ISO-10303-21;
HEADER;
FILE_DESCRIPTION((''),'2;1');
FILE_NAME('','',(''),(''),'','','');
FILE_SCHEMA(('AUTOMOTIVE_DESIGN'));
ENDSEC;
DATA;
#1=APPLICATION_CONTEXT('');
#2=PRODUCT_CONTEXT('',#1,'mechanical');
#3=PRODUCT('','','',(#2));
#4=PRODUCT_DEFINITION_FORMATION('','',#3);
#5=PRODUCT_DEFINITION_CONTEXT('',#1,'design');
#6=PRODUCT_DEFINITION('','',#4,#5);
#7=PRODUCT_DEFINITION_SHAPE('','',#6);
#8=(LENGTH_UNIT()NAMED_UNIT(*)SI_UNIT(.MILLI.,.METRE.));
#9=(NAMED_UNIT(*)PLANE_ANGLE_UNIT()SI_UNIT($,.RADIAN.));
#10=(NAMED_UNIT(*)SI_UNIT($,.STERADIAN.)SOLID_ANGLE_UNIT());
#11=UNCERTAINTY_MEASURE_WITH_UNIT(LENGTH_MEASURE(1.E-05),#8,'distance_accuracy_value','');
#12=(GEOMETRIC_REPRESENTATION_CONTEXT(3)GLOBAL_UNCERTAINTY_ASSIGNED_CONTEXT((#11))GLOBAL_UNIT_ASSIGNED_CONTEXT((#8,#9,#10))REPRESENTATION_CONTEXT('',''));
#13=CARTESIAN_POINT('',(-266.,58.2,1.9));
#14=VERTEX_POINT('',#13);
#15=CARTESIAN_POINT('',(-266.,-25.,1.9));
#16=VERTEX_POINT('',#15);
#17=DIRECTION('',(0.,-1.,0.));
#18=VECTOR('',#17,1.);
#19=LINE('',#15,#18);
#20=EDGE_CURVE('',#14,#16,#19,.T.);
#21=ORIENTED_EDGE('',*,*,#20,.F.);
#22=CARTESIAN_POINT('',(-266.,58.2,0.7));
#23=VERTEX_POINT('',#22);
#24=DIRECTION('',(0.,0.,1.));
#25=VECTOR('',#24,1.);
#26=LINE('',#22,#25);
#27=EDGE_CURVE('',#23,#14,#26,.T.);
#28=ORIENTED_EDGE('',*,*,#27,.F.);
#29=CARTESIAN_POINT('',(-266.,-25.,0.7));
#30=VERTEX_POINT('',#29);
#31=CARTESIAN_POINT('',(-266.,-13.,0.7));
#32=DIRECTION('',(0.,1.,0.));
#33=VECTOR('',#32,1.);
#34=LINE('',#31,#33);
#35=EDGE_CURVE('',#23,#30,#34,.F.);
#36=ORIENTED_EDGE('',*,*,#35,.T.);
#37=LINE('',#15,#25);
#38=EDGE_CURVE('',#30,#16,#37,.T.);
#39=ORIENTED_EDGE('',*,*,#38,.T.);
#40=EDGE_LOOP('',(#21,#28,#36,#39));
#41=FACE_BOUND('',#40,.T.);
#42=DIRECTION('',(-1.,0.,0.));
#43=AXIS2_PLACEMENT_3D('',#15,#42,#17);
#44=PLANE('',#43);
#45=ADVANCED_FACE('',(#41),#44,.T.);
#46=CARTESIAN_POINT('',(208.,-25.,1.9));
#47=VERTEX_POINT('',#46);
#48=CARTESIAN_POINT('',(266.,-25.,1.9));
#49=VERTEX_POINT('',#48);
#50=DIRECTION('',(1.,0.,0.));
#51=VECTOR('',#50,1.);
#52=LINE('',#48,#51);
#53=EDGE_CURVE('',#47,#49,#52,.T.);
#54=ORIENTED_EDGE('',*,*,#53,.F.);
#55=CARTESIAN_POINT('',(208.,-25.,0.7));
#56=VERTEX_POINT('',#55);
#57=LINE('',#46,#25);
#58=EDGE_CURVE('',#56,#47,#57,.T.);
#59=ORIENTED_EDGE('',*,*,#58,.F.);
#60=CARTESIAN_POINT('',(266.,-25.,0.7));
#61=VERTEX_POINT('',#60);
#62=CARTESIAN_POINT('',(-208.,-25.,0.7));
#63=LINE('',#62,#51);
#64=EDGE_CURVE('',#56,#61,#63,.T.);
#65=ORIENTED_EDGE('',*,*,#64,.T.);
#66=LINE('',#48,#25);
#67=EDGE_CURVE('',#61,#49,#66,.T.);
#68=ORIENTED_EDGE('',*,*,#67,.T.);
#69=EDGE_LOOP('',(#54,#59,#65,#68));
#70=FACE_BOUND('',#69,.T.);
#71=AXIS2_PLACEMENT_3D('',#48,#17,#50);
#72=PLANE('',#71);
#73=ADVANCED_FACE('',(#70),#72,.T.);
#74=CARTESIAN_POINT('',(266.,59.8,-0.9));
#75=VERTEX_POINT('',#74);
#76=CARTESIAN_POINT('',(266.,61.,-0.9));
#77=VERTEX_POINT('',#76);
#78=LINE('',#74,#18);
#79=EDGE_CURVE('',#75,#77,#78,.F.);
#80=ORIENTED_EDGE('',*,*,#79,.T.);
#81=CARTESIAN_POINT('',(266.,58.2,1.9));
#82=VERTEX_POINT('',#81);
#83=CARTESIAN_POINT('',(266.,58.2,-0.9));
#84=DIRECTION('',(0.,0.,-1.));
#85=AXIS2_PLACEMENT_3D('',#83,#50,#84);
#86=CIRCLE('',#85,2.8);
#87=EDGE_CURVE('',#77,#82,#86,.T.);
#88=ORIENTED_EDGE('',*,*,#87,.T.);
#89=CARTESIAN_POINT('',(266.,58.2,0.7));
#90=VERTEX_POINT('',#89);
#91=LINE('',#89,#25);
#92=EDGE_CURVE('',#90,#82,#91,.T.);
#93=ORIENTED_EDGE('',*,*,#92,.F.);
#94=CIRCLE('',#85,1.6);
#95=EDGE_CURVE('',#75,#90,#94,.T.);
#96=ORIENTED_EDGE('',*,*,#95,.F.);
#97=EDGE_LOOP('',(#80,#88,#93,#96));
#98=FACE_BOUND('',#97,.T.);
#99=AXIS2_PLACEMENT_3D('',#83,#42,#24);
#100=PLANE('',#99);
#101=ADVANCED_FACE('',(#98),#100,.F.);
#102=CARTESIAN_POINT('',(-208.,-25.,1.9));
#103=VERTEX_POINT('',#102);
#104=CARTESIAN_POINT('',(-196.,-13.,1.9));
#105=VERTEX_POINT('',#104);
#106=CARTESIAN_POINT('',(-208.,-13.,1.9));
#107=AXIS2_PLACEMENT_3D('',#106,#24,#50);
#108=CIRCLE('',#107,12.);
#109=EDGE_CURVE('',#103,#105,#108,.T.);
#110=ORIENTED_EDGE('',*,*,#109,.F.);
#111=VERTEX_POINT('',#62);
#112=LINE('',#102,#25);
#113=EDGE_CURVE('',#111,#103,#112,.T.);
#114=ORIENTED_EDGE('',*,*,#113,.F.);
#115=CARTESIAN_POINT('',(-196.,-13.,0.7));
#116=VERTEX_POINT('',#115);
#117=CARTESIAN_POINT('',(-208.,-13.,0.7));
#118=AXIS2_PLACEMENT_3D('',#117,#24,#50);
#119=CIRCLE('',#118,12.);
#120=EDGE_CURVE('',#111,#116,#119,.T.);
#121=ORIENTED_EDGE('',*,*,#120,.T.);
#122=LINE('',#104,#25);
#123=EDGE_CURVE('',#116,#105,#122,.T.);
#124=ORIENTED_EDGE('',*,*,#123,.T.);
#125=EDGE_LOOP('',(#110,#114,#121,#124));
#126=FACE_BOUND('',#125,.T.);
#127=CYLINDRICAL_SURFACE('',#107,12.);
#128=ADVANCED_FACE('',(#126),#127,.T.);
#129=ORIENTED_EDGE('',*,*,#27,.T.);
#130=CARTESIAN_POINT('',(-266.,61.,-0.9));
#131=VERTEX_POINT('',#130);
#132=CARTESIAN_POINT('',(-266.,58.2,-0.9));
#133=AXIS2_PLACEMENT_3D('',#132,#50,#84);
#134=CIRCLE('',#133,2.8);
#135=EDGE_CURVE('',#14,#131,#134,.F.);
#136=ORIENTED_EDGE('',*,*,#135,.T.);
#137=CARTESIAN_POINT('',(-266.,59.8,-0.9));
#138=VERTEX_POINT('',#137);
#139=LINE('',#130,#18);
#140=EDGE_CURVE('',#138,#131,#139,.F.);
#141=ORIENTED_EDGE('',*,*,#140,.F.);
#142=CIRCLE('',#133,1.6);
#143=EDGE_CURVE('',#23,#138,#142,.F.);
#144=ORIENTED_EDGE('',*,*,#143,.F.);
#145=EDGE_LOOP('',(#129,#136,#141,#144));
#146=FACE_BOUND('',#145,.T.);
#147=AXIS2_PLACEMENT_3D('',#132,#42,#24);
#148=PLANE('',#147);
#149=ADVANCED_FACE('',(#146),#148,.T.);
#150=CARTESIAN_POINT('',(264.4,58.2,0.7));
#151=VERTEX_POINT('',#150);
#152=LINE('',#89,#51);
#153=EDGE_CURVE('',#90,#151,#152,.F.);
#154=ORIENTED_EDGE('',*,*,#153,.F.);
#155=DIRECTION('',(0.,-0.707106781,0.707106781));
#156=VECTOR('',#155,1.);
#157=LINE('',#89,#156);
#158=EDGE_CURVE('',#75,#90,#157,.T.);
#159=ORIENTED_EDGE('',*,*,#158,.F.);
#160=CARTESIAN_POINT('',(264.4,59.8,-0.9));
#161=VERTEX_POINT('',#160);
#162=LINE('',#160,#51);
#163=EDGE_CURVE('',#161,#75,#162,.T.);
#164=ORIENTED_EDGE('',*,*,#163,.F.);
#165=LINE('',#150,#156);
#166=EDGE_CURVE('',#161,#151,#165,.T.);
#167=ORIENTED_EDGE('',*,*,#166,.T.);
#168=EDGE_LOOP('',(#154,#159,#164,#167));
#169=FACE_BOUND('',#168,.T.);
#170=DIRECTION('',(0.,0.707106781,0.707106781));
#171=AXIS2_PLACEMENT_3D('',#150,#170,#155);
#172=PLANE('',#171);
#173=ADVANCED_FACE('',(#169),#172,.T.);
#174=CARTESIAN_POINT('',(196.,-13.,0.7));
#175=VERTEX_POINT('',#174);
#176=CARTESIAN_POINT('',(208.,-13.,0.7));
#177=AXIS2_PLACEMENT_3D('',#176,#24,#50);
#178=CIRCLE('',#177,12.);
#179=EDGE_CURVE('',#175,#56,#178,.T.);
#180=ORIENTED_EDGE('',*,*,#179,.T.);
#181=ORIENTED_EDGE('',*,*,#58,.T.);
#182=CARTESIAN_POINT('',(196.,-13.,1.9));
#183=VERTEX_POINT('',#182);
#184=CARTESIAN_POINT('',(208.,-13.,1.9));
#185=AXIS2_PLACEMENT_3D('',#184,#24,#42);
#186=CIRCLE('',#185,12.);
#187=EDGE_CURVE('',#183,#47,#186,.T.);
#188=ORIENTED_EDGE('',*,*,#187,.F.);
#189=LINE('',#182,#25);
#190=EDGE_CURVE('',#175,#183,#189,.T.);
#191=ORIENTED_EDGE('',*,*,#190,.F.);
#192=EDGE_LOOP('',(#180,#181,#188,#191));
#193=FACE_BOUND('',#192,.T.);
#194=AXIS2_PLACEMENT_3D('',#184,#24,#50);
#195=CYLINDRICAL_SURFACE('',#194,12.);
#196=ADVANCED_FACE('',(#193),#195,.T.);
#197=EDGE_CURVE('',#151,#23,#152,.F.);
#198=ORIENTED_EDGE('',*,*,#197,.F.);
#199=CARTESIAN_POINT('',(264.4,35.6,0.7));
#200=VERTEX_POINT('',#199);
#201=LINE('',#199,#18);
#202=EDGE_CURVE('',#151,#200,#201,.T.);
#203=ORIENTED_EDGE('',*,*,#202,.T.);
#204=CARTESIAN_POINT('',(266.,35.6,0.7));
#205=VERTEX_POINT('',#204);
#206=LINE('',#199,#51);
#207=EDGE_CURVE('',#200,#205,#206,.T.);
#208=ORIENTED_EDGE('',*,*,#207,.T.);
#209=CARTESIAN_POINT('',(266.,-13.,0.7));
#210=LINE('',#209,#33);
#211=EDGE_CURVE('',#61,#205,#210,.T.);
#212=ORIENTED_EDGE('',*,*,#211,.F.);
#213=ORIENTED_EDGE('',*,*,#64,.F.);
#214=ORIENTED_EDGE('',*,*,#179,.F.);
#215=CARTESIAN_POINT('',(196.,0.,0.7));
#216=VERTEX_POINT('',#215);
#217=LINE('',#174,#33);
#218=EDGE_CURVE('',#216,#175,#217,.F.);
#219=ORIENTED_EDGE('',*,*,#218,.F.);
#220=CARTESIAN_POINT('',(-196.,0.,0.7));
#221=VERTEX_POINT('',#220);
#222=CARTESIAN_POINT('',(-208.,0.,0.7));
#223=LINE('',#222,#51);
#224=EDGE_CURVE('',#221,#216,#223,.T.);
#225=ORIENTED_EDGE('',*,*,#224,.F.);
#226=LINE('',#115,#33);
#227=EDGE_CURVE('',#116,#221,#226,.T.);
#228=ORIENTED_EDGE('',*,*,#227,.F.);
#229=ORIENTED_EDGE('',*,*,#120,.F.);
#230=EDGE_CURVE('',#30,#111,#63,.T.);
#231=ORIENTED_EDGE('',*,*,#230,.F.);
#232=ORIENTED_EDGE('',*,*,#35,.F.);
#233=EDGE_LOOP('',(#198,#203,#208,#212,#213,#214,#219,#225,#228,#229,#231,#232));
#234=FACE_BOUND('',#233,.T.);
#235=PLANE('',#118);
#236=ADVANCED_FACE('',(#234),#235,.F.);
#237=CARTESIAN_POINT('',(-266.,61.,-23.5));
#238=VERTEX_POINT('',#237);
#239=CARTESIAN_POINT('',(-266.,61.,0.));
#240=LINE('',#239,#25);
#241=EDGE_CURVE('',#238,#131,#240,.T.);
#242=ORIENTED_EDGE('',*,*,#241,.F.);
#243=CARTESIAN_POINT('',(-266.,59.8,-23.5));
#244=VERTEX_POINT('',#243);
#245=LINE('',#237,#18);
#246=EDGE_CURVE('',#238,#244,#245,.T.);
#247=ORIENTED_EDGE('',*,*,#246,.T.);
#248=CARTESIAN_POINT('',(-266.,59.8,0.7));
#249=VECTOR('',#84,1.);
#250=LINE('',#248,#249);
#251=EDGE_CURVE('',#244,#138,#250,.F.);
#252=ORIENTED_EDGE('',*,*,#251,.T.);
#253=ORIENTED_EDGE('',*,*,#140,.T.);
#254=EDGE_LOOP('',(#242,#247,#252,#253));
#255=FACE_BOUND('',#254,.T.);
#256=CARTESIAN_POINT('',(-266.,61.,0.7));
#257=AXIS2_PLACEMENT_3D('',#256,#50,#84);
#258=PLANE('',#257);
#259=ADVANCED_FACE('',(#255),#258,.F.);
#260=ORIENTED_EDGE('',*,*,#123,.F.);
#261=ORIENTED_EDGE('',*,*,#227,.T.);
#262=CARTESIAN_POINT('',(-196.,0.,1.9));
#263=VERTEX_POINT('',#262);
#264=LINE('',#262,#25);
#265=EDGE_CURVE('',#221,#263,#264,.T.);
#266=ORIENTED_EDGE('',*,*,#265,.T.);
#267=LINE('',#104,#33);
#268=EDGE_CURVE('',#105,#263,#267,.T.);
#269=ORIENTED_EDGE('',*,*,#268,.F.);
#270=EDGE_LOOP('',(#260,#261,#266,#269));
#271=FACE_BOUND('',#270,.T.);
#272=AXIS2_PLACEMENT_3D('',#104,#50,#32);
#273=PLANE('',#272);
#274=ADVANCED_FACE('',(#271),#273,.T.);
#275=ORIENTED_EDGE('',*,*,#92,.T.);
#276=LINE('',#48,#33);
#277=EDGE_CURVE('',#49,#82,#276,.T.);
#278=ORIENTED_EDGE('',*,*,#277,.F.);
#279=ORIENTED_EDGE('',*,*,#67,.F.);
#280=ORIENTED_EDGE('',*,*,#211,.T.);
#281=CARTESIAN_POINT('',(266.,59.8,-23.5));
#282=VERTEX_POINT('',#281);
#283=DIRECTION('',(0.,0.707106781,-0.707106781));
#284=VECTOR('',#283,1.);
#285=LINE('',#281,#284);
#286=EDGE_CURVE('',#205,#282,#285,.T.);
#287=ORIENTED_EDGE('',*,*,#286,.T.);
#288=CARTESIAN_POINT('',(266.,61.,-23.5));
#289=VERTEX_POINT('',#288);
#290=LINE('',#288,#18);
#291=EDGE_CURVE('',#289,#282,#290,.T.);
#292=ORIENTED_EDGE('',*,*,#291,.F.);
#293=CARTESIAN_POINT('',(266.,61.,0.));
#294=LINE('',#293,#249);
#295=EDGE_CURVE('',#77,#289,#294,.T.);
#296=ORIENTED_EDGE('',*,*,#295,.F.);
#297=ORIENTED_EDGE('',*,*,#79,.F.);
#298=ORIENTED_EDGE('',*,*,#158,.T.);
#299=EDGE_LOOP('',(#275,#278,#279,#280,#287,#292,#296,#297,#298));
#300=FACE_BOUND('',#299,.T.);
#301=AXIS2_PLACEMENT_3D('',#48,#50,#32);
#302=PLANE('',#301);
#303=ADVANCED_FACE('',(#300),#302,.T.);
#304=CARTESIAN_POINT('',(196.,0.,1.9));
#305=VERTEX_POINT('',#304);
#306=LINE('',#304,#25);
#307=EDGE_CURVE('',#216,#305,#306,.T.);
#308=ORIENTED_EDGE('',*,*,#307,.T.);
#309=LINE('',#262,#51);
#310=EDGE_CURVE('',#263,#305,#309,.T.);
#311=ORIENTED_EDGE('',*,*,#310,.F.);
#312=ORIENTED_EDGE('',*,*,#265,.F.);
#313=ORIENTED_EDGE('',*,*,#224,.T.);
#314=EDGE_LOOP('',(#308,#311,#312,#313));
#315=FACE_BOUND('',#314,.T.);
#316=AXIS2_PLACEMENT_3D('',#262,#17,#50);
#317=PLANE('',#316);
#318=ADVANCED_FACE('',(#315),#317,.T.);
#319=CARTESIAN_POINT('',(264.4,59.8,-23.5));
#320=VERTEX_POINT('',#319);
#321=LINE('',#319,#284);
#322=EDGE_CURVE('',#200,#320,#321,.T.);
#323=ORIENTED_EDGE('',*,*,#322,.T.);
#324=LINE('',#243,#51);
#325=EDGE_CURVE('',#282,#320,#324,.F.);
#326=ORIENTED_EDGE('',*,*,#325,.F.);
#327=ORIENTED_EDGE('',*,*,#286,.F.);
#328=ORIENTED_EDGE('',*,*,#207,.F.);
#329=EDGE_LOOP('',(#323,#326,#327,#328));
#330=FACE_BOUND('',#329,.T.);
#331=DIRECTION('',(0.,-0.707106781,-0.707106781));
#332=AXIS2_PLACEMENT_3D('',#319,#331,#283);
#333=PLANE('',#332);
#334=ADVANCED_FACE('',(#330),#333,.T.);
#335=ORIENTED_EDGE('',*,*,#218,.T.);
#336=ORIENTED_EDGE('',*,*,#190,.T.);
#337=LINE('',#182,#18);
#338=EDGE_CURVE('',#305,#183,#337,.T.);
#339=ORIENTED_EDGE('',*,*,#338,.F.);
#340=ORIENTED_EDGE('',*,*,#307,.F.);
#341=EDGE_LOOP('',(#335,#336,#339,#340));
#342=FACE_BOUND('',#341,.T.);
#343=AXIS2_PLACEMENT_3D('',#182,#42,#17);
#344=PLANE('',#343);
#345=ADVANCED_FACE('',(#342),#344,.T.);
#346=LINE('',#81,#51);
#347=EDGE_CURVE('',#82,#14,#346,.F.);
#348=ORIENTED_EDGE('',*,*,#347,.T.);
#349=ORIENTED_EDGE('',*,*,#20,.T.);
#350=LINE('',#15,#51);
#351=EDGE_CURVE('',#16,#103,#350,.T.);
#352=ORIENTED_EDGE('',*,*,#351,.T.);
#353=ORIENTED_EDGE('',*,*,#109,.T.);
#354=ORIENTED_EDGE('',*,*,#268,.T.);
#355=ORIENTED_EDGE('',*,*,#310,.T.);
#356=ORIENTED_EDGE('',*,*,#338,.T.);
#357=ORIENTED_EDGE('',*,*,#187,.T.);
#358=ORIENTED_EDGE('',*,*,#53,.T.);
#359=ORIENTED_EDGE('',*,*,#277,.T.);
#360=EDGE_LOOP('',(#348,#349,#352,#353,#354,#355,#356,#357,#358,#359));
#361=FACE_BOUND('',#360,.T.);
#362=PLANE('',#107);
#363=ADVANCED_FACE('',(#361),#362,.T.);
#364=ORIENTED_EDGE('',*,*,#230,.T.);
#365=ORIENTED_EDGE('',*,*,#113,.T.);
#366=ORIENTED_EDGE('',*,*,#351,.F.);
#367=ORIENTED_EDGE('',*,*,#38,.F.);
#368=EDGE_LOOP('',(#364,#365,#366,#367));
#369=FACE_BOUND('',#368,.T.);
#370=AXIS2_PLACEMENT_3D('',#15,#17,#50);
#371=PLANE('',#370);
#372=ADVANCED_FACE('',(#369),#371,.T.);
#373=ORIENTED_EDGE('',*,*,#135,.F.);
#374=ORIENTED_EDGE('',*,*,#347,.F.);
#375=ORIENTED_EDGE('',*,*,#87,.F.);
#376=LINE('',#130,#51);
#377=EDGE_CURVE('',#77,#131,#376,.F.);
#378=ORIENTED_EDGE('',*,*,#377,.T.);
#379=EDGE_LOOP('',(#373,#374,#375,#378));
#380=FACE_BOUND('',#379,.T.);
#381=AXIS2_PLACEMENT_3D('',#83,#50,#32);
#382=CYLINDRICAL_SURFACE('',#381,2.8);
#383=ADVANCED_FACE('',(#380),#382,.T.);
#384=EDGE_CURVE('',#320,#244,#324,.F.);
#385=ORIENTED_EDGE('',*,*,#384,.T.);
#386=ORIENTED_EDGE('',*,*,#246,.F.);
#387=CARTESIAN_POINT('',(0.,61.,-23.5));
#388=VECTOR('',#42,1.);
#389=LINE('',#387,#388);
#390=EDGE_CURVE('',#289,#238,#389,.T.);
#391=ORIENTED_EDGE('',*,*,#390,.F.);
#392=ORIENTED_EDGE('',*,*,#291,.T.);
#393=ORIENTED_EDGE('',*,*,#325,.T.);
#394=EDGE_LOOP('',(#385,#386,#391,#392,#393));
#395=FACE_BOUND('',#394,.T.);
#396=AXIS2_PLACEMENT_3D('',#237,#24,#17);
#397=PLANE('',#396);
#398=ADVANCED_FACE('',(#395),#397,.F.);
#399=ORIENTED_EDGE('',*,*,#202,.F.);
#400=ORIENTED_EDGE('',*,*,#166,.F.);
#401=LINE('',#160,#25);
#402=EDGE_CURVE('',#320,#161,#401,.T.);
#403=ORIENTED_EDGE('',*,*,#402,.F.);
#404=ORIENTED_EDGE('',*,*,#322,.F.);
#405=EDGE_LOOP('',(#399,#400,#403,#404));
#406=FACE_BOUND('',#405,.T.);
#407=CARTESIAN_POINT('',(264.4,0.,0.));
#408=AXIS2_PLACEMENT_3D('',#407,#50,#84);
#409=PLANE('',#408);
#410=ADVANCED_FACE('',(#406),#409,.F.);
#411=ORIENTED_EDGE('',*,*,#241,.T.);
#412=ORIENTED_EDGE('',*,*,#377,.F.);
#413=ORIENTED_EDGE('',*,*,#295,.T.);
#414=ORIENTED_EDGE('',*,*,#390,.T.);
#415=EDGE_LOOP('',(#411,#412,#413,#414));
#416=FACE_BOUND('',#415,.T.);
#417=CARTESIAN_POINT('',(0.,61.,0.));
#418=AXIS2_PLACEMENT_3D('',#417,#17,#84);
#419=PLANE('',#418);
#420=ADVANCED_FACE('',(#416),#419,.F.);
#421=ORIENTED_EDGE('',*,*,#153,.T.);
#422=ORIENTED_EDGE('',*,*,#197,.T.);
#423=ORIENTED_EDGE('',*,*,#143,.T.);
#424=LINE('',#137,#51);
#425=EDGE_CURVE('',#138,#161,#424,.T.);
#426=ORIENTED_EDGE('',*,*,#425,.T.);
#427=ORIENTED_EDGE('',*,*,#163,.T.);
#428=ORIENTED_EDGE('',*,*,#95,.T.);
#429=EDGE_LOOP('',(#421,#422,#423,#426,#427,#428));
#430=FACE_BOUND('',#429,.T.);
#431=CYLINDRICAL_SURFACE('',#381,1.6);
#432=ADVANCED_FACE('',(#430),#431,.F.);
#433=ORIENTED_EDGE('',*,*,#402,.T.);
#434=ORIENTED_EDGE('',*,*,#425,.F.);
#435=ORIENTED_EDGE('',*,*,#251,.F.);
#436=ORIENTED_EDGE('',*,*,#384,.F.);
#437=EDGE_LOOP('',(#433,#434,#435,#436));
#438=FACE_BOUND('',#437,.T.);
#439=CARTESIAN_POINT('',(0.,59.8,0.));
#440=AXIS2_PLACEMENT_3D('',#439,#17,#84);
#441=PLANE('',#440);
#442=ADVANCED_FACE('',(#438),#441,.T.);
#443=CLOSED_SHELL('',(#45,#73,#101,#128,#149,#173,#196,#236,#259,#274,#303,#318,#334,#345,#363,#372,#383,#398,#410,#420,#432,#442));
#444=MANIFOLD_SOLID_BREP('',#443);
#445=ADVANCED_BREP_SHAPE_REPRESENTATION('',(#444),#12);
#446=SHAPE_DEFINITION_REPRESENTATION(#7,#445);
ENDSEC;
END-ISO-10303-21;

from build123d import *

# Parameters (mm, degrees)
RESSALTO_EXTRUS_O1_DEPTH       = 1.9
CONVERTER_S_LIDO1_DEPTH        = 0.7
ARESTA_FLANGE1_STRIP_W         = 8
ARESTA_FLANGE1_STRIP_H         = 1.2
ARESTA_FLANGE1_STRIP_CUT_DEPTH = 532
ARESTA_FLANGE1_DEPTH           = 532
RESSALTO_EXTRUS_O2_DEPTH       = 1.6


# Read off the part's stored shape, not the designer's step: Converter-Sólido1
# Sheet-metal steps are written as plain solids
with BuildPart() as part:
    # Esboço1 → Ressalto-extrusão1 (new body)
    with BuildSketch(Plane.XY):
        with BuildLine():
            Line((-266, -25), (-266, 61))
            Line((-266, 61), (266, 61))
            Line((266, 61), (266, -25))
            Line((266, -25), (208, -25))
            ThreePointArc((208, -25), (199.514718626, -21.485281374), (196, -13))
            Line((196, -13), (196, 0))
            Line((196, 0), (-196, 0))
            Line((-196, 0), (-196, -13))
            ThreePointArc((-196, -13), (-199.514718626, -21.485281374), (-208, -25))
            Line((-208, -25), (-266, -25))
        make_face()
    extrude(amount=RESSALTO_EXTRUS_O1_DEPTH)

    # Converter-Sólido1 outline → Converter-Sólido1 (cut)
    with BuildSketch(Plane.XY):
        with BuildLine():
            Line((-266, -25), (-208, -25))
            ThreePointArc((-208, -25), (-199.514718626, -21.485281374), (-196, -13))
            Line((-196, -13), (-196, 0))
            Line((-196, 0), (196, 0))
            Line((196, 0), (196, -13))
            ThreePointArc((196, -13), (199.514718626, -21.485281374), (208, -25))
            Line((208, -25), (266, -25))
            Line((266, -25), (266, 61))
            Line((266, 61), (-266, 61))
            Line((-266, 61), (-266, -25))
        make_face()
    extrude(amount=CONVERTER_S_LIDO1_DEPTH, mode=Mode.SUBTRACT)

    # Aresta-Flange1 strip (across the edge) → Aresta-Flange1 strip cut (cut)
    with BuildSketch(Plane(origin=(-266, 61, 0.7), x_dir=(0, -1, 0), z_dir=(1, 0, 0))):
        with Locations((-1.2, -0.6)):
            Rectangle(ARESTA_FLANGE1_STRIP_W, ARESTA_FLANGE1_STRIP_H)
    extrude(amount=ARESTA_FLANGE1_STRIP_CUT_DEPTH, mode=Mode.SUBTRACT)

    # Aresta-Flange1 section (across the edge) → Aresta-Flange1 (add)
    with BuildSketch(Plane(origin=(-266, 61, 0.7), x_dir=(0, -1, 0), z_dir=(1, 0, 0))):
        with BuildLine():
            Line((0, 1.6), (0, 24.2))
            Line((0, 24.2), (1.2, 24.2))
            Line((1.2, 24.2), (1.2, 1.6))
            ThreePointArc((1.2, 1.6), (1.66862915, 0.46862915), (2.8, 0))
            Line((2.8, 0), (2.8, -1.2))
            ThreePointArc((2.8, -1.2), (0.820101013, -0.379898987), (0, 1.6))
        make_face()
    extrude(amount=ARESTA_FLANGE1_DEPTH)

    # Esboço5 → Ressalto-extrusão2 (add)
    with BuildSketch(Plane(origin=(266, 0, 0), x_dir=(0, 0, -1), z_dir=(1, 0, 0))):
        Polygon((23.5, 59.8), (-0.7, 35.6), (-0.7, 58.2), (0.9, 59.8), align=None)
    extrude(amount=-RESSALTO_EXTRUS_O2_DEPTH)


solid = part.part
